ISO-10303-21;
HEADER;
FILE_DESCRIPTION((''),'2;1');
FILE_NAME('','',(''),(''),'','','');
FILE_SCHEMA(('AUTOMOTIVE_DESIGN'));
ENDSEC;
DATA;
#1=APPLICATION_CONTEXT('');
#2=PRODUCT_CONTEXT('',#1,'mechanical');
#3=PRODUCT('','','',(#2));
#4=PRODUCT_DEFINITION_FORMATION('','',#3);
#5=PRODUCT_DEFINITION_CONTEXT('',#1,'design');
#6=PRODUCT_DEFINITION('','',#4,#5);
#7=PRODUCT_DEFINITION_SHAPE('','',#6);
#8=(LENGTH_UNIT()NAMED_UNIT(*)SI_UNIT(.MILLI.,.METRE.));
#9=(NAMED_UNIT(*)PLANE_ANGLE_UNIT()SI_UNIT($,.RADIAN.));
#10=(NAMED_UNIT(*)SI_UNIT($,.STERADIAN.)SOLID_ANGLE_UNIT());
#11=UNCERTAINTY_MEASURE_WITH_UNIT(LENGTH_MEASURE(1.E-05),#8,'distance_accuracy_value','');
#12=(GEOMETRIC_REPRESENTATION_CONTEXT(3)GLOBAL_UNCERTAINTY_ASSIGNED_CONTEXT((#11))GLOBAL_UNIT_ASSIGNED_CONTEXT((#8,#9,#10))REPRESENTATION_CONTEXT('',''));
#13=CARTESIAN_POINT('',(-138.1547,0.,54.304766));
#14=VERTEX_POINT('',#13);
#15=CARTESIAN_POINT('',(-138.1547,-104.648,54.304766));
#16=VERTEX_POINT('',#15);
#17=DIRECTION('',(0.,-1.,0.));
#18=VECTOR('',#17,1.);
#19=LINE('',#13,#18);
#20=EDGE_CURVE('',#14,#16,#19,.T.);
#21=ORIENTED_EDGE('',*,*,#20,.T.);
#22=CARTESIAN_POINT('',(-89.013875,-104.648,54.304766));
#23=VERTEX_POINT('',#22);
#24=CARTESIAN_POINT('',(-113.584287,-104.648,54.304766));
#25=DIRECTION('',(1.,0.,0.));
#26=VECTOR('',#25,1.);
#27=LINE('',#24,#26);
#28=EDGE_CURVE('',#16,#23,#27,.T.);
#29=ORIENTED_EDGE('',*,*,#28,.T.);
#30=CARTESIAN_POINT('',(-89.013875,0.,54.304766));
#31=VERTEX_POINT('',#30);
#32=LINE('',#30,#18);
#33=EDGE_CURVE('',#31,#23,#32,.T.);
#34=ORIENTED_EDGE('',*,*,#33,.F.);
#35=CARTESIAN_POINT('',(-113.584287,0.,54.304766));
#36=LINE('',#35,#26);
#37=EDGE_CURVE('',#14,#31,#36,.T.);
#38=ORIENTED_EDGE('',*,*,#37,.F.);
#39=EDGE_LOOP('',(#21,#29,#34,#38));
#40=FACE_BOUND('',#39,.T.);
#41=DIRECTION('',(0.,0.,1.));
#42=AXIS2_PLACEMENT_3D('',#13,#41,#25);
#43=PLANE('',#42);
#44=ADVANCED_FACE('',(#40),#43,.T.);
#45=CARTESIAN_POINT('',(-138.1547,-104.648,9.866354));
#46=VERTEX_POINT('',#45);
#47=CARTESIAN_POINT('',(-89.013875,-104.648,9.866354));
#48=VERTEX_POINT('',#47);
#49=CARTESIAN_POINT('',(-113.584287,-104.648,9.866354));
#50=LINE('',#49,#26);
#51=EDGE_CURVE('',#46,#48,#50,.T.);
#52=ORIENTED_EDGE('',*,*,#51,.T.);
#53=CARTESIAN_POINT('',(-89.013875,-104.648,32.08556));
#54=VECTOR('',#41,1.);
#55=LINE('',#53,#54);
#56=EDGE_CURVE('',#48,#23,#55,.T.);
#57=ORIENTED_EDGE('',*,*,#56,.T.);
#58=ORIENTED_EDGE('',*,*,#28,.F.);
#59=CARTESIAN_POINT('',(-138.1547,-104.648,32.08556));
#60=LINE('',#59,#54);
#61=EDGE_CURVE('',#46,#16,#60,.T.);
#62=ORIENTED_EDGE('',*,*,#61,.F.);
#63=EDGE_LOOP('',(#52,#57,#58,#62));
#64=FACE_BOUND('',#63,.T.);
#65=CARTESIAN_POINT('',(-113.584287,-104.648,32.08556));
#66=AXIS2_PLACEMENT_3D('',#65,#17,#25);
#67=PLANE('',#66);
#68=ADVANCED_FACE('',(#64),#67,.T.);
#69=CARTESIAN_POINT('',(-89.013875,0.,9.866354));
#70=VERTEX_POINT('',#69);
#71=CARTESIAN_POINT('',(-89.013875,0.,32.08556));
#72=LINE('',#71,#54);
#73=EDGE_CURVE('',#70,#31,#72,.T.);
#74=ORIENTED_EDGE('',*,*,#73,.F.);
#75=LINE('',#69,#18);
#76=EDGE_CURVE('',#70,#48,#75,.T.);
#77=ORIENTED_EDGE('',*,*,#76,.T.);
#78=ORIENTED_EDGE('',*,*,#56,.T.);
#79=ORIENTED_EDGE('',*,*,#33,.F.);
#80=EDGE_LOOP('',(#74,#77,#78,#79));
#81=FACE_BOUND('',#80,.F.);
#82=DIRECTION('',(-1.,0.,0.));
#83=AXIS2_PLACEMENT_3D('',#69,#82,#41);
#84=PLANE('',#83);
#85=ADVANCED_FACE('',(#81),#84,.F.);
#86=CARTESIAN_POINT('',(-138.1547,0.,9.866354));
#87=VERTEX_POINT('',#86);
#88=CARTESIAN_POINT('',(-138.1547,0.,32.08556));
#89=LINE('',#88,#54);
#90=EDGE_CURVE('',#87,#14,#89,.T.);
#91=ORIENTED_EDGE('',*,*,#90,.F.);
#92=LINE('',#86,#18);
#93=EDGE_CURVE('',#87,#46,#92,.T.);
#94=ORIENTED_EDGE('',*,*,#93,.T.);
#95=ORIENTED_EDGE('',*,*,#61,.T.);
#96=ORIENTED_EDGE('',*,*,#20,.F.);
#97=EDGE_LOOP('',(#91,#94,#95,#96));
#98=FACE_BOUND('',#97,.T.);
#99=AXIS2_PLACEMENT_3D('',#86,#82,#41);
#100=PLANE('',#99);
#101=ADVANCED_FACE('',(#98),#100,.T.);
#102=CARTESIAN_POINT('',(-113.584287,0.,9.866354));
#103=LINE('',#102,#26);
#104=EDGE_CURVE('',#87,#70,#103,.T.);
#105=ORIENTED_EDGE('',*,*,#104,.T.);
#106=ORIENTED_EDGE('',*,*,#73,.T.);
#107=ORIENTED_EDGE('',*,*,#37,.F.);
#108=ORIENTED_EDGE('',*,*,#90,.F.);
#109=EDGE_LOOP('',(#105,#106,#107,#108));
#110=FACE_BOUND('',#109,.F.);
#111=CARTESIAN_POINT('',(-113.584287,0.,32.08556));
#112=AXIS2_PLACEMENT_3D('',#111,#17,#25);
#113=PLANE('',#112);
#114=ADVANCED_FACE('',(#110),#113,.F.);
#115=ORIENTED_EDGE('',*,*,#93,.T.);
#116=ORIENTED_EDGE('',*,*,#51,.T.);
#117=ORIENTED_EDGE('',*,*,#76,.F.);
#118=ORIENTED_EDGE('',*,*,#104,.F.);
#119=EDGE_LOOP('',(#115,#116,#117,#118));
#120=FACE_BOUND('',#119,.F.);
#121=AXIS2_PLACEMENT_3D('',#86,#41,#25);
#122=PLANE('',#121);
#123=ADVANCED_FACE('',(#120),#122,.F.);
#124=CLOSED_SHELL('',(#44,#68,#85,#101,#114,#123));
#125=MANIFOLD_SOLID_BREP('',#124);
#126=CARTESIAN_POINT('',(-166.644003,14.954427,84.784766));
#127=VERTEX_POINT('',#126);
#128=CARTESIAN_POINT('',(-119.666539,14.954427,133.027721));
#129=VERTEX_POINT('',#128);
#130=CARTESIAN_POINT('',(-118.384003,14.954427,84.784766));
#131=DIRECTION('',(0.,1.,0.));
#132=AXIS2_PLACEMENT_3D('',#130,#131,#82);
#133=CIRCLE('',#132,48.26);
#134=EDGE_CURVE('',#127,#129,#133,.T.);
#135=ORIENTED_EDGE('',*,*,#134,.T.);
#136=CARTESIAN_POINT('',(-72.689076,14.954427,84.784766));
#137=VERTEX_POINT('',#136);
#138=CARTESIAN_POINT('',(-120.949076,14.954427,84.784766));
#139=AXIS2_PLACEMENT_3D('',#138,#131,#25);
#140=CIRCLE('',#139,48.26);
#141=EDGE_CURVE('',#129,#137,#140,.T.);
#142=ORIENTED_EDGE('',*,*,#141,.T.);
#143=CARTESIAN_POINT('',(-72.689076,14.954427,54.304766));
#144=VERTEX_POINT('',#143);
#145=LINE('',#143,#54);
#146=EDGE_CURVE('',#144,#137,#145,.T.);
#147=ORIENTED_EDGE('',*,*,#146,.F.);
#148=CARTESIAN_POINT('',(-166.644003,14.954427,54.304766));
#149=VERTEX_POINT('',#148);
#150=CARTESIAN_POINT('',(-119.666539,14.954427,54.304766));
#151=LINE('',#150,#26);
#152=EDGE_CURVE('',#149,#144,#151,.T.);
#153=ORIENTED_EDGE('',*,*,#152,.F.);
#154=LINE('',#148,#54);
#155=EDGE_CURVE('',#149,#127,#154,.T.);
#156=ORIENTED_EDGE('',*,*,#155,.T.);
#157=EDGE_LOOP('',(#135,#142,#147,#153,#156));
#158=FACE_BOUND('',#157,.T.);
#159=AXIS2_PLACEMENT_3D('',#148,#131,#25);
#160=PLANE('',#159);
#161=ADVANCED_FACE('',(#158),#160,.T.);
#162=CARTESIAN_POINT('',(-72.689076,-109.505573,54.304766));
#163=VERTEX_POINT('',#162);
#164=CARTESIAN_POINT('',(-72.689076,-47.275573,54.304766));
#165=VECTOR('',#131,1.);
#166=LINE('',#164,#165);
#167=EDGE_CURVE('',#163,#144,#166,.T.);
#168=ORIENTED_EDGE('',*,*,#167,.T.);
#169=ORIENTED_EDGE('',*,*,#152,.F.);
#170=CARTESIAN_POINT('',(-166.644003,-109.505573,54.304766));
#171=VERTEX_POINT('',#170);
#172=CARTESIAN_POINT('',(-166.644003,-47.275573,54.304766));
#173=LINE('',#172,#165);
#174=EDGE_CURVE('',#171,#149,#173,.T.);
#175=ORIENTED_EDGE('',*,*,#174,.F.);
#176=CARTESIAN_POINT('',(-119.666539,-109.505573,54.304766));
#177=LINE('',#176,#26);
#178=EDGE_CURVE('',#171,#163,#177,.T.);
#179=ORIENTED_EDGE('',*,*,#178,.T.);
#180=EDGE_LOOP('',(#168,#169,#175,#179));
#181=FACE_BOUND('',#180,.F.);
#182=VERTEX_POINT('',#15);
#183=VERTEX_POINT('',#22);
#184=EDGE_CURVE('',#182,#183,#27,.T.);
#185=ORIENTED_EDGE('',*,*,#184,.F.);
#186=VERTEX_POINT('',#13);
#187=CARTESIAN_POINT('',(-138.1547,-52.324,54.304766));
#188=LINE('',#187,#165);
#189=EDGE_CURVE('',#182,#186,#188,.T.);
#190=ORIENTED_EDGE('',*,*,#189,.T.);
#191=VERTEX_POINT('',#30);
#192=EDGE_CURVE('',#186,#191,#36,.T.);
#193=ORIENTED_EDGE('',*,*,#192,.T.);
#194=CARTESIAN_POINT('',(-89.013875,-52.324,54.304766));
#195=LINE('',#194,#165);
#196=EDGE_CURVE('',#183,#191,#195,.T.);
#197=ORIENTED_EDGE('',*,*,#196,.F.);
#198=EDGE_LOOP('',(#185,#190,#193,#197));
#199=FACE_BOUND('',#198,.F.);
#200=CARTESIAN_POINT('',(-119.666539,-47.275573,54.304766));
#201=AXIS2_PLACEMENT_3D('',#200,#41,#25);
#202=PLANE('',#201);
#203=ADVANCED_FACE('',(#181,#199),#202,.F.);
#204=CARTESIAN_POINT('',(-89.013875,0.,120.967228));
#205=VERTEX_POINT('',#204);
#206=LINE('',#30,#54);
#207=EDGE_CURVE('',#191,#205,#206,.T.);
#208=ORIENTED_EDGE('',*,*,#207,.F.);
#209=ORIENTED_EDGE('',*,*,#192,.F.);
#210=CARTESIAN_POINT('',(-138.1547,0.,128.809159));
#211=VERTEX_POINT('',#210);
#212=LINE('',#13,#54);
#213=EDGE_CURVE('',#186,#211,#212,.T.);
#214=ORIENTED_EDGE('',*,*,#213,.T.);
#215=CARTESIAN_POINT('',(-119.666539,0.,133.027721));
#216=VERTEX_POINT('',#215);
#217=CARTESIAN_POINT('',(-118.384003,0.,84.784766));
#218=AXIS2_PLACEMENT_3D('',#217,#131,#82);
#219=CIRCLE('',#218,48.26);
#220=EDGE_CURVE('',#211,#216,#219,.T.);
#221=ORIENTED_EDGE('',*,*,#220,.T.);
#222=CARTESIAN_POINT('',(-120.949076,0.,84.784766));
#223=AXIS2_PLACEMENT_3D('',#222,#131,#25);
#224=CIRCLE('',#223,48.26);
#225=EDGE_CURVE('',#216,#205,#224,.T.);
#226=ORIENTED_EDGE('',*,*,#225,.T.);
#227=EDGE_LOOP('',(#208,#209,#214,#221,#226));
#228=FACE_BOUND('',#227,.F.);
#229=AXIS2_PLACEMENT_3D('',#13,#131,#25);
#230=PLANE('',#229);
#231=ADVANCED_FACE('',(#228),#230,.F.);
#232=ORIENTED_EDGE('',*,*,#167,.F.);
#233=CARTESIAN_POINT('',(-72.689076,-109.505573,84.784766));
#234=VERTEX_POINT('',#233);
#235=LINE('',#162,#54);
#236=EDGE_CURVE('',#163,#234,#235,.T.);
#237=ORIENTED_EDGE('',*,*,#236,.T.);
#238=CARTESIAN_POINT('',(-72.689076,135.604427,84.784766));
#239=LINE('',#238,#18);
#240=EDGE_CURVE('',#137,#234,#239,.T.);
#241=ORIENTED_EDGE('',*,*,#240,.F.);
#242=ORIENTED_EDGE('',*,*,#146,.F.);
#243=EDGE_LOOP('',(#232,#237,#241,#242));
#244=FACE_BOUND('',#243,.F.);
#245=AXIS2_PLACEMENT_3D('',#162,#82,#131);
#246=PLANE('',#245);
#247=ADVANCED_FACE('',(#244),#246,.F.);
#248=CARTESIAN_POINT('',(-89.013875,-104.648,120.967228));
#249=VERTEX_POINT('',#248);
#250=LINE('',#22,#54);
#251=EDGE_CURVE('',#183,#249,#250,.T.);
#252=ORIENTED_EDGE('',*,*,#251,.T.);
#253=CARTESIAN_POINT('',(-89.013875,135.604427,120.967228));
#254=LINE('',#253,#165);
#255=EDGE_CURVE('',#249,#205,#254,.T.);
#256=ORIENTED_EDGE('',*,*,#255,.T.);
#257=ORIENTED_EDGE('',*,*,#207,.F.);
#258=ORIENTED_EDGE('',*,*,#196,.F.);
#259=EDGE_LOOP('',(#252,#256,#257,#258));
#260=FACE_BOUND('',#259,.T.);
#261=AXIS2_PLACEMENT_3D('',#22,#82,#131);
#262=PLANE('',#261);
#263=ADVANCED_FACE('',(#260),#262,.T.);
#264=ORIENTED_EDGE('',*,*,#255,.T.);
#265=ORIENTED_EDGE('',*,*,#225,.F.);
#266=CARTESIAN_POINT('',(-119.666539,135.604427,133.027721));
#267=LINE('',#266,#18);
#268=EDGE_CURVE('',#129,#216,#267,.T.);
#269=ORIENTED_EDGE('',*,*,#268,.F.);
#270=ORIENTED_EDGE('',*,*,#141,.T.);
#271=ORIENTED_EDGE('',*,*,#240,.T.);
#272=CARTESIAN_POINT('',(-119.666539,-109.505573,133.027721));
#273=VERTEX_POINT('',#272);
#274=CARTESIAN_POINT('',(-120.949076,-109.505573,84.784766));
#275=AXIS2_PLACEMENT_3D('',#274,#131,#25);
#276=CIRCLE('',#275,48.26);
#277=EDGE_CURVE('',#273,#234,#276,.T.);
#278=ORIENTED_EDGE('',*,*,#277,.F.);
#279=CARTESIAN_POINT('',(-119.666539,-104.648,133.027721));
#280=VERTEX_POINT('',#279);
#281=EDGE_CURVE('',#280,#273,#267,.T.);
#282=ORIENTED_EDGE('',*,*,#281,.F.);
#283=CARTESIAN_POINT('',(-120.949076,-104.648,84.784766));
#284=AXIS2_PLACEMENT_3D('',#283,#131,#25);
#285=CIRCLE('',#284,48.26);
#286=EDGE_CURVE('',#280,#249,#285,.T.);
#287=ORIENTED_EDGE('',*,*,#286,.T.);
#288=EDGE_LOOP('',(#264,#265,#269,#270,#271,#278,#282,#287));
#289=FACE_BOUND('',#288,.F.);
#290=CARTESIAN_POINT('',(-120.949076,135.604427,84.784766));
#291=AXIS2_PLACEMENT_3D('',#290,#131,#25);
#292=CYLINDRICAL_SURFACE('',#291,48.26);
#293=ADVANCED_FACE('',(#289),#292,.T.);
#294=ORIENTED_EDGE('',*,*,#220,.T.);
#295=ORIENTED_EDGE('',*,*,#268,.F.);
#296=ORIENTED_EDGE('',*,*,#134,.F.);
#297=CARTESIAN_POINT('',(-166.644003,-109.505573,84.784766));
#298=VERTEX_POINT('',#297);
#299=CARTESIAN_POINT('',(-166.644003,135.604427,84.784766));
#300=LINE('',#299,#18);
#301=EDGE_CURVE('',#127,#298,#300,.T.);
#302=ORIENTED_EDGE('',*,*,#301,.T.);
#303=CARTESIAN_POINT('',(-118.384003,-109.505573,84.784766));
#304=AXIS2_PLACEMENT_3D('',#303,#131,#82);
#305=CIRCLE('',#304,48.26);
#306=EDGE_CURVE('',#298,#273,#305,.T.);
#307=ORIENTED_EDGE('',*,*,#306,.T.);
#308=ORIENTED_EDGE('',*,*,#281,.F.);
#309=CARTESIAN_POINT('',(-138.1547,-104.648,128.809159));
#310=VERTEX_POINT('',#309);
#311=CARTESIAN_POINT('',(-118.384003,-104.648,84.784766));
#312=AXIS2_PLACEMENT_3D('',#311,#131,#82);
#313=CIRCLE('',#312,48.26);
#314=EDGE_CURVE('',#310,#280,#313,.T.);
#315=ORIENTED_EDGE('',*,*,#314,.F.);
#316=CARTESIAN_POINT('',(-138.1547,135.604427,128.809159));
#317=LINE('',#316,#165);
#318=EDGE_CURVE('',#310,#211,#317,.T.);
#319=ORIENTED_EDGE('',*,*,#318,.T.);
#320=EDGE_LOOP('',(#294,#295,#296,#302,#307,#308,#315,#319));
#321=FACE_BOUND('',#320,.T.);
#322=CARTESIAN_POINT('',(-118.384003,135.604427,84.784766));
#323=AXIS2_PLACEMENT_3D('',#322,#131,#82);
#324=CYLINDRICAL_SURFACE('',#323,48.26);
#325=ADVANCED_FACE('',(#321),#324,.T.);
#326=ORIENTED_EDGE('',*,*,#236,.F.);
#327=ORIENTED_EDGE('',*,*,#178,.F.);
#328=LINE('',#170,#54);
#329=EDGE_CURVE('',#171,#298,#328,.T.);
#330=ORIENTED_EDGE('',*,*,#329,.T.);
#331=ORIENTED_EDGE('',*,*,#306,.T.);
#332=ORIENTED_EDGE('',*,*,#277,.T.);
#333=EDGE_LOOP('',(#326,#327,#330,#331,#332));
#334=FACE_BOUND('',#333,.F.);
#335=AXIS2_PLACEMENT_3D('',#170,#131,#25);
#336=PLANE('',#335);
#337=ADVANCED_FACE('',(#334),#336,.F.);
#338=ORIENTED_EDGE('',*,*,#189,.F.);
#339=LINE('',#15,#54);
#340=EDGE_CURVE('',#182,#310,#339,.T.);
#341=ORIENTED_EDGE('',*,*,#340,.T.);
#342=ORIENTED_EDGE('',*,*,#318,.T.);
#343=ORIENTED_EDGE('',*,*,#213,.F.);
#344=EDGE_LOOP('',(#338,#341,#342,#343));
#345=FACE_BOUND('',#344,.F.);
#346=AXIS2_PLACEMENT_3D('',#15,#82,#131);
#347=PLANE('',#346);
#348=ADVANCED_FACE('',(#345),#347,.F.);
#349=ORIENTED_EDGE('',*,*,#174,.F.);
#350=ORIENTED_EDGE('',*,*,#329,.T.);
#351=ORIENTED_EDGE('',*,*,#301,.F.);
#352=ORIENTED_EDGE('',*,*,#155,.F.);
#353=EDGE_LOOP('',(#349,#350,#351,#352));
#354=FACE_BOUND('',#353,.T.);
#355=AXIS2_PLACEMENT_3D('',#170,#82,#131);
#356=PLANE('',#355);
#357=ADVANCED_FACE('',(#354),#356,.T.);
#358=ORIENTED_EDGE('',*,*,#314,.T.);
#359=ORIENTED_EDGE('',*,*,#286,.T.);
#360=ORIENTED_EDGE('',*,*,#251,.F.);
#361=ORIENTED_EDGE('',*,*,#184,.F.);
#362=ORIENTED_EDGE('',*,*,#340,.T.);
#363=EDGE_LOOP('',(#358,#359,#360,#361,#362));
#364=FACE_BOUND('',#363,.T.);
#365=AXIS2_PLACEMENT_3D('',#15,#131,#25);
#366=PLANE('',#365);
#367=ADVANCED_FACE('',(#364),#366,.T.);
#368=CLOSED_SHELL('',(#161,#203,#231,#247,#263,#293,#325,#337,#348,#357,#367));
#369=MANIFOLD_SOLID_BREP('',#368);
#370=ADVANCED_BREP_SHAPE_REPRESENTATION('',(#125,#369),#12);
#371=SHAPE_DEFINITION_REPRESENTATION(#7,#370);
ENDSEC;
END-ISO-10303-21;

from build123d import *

# Parameters (mm, degrees)
F0_W        = 49.1408258677
F0_H        = 44.438412413
F1_DEPTH    = 104.648
F2_W        = 93.9549271504
F2_H        = 124.46
F2_W_2      = 49.1408258677
F2_H_2      = 104.648
F3_DEPTH    = 78.74
F4_T1_DEPTH = 365.76


# Not quite as in the source:
# - a fillet or chamfer that OpenCascade refuses, or shapes differently, is made with other operations: its cross-section is extruded or revolved along the edge and cut away or added


with BuildPart() as f1:
    # F0 (on Front) → F1 (new body)
    with BuildSketch(Plane.XZ):
        with Locations((-113.5842874646, 32.0855602622)):
            Rectangle(F0_W, F0_H)
    extrude(amount=F1_DEPTH)


with BuildPart() as f3:
    # F2 (on face) → F3 (new body)
    with BuildSketch(Plane.XY.offset(54.3047664687)):
        with Locations((-119.6665391326, -47.2755730152)):
            Rectangle(F2_W, F2_H)
        with Locations((-113.5842874646, -52.324)):
            Rectangle(F2_W_2, F2_H_2, mode=Mode.SUBTRACT)
    extrude(amount=F3_DEPTH)

    # F4: fillet of radius 48.26 on 2 edges, made by hand

    # F4_s2 → F4_t1 (cut)
    with BuildSketch(Plane.XZ.offset(-135.6044269848)):
        with BuildLine():
            ThreePointArc((-72.6890755574, 84.7847664687), (-86.8241022974, 118.9097397288), (-120.9490755574, 133.0447664687))
            Line((-120.9490755574, 133.0447664687), (-72.6890755574, 133.0447664687))
            Line((-72.6890755574, 133.0447664687), (-72.6890755574, 84.7847664687))
        make_face()
        with BuildLine():
            ThreePointArc((-166.6440027078, 84.7847664687), (-152.5089759678, 118.9097397288), (-118.3840027078, 133.0447664687))
            Line((-118.3840027078, 133.0447664687), (-166.6440027078, 133.0447664687))
            Line((-166.6440027078, 133.0447664687), (-166.6440027078, 84.7847664687))
        make_face()
    extrude(amount=F4_T1_DEPTH, mode=Mode.SUBTRACT)


solid = Compound([f1.part, f3.part])
